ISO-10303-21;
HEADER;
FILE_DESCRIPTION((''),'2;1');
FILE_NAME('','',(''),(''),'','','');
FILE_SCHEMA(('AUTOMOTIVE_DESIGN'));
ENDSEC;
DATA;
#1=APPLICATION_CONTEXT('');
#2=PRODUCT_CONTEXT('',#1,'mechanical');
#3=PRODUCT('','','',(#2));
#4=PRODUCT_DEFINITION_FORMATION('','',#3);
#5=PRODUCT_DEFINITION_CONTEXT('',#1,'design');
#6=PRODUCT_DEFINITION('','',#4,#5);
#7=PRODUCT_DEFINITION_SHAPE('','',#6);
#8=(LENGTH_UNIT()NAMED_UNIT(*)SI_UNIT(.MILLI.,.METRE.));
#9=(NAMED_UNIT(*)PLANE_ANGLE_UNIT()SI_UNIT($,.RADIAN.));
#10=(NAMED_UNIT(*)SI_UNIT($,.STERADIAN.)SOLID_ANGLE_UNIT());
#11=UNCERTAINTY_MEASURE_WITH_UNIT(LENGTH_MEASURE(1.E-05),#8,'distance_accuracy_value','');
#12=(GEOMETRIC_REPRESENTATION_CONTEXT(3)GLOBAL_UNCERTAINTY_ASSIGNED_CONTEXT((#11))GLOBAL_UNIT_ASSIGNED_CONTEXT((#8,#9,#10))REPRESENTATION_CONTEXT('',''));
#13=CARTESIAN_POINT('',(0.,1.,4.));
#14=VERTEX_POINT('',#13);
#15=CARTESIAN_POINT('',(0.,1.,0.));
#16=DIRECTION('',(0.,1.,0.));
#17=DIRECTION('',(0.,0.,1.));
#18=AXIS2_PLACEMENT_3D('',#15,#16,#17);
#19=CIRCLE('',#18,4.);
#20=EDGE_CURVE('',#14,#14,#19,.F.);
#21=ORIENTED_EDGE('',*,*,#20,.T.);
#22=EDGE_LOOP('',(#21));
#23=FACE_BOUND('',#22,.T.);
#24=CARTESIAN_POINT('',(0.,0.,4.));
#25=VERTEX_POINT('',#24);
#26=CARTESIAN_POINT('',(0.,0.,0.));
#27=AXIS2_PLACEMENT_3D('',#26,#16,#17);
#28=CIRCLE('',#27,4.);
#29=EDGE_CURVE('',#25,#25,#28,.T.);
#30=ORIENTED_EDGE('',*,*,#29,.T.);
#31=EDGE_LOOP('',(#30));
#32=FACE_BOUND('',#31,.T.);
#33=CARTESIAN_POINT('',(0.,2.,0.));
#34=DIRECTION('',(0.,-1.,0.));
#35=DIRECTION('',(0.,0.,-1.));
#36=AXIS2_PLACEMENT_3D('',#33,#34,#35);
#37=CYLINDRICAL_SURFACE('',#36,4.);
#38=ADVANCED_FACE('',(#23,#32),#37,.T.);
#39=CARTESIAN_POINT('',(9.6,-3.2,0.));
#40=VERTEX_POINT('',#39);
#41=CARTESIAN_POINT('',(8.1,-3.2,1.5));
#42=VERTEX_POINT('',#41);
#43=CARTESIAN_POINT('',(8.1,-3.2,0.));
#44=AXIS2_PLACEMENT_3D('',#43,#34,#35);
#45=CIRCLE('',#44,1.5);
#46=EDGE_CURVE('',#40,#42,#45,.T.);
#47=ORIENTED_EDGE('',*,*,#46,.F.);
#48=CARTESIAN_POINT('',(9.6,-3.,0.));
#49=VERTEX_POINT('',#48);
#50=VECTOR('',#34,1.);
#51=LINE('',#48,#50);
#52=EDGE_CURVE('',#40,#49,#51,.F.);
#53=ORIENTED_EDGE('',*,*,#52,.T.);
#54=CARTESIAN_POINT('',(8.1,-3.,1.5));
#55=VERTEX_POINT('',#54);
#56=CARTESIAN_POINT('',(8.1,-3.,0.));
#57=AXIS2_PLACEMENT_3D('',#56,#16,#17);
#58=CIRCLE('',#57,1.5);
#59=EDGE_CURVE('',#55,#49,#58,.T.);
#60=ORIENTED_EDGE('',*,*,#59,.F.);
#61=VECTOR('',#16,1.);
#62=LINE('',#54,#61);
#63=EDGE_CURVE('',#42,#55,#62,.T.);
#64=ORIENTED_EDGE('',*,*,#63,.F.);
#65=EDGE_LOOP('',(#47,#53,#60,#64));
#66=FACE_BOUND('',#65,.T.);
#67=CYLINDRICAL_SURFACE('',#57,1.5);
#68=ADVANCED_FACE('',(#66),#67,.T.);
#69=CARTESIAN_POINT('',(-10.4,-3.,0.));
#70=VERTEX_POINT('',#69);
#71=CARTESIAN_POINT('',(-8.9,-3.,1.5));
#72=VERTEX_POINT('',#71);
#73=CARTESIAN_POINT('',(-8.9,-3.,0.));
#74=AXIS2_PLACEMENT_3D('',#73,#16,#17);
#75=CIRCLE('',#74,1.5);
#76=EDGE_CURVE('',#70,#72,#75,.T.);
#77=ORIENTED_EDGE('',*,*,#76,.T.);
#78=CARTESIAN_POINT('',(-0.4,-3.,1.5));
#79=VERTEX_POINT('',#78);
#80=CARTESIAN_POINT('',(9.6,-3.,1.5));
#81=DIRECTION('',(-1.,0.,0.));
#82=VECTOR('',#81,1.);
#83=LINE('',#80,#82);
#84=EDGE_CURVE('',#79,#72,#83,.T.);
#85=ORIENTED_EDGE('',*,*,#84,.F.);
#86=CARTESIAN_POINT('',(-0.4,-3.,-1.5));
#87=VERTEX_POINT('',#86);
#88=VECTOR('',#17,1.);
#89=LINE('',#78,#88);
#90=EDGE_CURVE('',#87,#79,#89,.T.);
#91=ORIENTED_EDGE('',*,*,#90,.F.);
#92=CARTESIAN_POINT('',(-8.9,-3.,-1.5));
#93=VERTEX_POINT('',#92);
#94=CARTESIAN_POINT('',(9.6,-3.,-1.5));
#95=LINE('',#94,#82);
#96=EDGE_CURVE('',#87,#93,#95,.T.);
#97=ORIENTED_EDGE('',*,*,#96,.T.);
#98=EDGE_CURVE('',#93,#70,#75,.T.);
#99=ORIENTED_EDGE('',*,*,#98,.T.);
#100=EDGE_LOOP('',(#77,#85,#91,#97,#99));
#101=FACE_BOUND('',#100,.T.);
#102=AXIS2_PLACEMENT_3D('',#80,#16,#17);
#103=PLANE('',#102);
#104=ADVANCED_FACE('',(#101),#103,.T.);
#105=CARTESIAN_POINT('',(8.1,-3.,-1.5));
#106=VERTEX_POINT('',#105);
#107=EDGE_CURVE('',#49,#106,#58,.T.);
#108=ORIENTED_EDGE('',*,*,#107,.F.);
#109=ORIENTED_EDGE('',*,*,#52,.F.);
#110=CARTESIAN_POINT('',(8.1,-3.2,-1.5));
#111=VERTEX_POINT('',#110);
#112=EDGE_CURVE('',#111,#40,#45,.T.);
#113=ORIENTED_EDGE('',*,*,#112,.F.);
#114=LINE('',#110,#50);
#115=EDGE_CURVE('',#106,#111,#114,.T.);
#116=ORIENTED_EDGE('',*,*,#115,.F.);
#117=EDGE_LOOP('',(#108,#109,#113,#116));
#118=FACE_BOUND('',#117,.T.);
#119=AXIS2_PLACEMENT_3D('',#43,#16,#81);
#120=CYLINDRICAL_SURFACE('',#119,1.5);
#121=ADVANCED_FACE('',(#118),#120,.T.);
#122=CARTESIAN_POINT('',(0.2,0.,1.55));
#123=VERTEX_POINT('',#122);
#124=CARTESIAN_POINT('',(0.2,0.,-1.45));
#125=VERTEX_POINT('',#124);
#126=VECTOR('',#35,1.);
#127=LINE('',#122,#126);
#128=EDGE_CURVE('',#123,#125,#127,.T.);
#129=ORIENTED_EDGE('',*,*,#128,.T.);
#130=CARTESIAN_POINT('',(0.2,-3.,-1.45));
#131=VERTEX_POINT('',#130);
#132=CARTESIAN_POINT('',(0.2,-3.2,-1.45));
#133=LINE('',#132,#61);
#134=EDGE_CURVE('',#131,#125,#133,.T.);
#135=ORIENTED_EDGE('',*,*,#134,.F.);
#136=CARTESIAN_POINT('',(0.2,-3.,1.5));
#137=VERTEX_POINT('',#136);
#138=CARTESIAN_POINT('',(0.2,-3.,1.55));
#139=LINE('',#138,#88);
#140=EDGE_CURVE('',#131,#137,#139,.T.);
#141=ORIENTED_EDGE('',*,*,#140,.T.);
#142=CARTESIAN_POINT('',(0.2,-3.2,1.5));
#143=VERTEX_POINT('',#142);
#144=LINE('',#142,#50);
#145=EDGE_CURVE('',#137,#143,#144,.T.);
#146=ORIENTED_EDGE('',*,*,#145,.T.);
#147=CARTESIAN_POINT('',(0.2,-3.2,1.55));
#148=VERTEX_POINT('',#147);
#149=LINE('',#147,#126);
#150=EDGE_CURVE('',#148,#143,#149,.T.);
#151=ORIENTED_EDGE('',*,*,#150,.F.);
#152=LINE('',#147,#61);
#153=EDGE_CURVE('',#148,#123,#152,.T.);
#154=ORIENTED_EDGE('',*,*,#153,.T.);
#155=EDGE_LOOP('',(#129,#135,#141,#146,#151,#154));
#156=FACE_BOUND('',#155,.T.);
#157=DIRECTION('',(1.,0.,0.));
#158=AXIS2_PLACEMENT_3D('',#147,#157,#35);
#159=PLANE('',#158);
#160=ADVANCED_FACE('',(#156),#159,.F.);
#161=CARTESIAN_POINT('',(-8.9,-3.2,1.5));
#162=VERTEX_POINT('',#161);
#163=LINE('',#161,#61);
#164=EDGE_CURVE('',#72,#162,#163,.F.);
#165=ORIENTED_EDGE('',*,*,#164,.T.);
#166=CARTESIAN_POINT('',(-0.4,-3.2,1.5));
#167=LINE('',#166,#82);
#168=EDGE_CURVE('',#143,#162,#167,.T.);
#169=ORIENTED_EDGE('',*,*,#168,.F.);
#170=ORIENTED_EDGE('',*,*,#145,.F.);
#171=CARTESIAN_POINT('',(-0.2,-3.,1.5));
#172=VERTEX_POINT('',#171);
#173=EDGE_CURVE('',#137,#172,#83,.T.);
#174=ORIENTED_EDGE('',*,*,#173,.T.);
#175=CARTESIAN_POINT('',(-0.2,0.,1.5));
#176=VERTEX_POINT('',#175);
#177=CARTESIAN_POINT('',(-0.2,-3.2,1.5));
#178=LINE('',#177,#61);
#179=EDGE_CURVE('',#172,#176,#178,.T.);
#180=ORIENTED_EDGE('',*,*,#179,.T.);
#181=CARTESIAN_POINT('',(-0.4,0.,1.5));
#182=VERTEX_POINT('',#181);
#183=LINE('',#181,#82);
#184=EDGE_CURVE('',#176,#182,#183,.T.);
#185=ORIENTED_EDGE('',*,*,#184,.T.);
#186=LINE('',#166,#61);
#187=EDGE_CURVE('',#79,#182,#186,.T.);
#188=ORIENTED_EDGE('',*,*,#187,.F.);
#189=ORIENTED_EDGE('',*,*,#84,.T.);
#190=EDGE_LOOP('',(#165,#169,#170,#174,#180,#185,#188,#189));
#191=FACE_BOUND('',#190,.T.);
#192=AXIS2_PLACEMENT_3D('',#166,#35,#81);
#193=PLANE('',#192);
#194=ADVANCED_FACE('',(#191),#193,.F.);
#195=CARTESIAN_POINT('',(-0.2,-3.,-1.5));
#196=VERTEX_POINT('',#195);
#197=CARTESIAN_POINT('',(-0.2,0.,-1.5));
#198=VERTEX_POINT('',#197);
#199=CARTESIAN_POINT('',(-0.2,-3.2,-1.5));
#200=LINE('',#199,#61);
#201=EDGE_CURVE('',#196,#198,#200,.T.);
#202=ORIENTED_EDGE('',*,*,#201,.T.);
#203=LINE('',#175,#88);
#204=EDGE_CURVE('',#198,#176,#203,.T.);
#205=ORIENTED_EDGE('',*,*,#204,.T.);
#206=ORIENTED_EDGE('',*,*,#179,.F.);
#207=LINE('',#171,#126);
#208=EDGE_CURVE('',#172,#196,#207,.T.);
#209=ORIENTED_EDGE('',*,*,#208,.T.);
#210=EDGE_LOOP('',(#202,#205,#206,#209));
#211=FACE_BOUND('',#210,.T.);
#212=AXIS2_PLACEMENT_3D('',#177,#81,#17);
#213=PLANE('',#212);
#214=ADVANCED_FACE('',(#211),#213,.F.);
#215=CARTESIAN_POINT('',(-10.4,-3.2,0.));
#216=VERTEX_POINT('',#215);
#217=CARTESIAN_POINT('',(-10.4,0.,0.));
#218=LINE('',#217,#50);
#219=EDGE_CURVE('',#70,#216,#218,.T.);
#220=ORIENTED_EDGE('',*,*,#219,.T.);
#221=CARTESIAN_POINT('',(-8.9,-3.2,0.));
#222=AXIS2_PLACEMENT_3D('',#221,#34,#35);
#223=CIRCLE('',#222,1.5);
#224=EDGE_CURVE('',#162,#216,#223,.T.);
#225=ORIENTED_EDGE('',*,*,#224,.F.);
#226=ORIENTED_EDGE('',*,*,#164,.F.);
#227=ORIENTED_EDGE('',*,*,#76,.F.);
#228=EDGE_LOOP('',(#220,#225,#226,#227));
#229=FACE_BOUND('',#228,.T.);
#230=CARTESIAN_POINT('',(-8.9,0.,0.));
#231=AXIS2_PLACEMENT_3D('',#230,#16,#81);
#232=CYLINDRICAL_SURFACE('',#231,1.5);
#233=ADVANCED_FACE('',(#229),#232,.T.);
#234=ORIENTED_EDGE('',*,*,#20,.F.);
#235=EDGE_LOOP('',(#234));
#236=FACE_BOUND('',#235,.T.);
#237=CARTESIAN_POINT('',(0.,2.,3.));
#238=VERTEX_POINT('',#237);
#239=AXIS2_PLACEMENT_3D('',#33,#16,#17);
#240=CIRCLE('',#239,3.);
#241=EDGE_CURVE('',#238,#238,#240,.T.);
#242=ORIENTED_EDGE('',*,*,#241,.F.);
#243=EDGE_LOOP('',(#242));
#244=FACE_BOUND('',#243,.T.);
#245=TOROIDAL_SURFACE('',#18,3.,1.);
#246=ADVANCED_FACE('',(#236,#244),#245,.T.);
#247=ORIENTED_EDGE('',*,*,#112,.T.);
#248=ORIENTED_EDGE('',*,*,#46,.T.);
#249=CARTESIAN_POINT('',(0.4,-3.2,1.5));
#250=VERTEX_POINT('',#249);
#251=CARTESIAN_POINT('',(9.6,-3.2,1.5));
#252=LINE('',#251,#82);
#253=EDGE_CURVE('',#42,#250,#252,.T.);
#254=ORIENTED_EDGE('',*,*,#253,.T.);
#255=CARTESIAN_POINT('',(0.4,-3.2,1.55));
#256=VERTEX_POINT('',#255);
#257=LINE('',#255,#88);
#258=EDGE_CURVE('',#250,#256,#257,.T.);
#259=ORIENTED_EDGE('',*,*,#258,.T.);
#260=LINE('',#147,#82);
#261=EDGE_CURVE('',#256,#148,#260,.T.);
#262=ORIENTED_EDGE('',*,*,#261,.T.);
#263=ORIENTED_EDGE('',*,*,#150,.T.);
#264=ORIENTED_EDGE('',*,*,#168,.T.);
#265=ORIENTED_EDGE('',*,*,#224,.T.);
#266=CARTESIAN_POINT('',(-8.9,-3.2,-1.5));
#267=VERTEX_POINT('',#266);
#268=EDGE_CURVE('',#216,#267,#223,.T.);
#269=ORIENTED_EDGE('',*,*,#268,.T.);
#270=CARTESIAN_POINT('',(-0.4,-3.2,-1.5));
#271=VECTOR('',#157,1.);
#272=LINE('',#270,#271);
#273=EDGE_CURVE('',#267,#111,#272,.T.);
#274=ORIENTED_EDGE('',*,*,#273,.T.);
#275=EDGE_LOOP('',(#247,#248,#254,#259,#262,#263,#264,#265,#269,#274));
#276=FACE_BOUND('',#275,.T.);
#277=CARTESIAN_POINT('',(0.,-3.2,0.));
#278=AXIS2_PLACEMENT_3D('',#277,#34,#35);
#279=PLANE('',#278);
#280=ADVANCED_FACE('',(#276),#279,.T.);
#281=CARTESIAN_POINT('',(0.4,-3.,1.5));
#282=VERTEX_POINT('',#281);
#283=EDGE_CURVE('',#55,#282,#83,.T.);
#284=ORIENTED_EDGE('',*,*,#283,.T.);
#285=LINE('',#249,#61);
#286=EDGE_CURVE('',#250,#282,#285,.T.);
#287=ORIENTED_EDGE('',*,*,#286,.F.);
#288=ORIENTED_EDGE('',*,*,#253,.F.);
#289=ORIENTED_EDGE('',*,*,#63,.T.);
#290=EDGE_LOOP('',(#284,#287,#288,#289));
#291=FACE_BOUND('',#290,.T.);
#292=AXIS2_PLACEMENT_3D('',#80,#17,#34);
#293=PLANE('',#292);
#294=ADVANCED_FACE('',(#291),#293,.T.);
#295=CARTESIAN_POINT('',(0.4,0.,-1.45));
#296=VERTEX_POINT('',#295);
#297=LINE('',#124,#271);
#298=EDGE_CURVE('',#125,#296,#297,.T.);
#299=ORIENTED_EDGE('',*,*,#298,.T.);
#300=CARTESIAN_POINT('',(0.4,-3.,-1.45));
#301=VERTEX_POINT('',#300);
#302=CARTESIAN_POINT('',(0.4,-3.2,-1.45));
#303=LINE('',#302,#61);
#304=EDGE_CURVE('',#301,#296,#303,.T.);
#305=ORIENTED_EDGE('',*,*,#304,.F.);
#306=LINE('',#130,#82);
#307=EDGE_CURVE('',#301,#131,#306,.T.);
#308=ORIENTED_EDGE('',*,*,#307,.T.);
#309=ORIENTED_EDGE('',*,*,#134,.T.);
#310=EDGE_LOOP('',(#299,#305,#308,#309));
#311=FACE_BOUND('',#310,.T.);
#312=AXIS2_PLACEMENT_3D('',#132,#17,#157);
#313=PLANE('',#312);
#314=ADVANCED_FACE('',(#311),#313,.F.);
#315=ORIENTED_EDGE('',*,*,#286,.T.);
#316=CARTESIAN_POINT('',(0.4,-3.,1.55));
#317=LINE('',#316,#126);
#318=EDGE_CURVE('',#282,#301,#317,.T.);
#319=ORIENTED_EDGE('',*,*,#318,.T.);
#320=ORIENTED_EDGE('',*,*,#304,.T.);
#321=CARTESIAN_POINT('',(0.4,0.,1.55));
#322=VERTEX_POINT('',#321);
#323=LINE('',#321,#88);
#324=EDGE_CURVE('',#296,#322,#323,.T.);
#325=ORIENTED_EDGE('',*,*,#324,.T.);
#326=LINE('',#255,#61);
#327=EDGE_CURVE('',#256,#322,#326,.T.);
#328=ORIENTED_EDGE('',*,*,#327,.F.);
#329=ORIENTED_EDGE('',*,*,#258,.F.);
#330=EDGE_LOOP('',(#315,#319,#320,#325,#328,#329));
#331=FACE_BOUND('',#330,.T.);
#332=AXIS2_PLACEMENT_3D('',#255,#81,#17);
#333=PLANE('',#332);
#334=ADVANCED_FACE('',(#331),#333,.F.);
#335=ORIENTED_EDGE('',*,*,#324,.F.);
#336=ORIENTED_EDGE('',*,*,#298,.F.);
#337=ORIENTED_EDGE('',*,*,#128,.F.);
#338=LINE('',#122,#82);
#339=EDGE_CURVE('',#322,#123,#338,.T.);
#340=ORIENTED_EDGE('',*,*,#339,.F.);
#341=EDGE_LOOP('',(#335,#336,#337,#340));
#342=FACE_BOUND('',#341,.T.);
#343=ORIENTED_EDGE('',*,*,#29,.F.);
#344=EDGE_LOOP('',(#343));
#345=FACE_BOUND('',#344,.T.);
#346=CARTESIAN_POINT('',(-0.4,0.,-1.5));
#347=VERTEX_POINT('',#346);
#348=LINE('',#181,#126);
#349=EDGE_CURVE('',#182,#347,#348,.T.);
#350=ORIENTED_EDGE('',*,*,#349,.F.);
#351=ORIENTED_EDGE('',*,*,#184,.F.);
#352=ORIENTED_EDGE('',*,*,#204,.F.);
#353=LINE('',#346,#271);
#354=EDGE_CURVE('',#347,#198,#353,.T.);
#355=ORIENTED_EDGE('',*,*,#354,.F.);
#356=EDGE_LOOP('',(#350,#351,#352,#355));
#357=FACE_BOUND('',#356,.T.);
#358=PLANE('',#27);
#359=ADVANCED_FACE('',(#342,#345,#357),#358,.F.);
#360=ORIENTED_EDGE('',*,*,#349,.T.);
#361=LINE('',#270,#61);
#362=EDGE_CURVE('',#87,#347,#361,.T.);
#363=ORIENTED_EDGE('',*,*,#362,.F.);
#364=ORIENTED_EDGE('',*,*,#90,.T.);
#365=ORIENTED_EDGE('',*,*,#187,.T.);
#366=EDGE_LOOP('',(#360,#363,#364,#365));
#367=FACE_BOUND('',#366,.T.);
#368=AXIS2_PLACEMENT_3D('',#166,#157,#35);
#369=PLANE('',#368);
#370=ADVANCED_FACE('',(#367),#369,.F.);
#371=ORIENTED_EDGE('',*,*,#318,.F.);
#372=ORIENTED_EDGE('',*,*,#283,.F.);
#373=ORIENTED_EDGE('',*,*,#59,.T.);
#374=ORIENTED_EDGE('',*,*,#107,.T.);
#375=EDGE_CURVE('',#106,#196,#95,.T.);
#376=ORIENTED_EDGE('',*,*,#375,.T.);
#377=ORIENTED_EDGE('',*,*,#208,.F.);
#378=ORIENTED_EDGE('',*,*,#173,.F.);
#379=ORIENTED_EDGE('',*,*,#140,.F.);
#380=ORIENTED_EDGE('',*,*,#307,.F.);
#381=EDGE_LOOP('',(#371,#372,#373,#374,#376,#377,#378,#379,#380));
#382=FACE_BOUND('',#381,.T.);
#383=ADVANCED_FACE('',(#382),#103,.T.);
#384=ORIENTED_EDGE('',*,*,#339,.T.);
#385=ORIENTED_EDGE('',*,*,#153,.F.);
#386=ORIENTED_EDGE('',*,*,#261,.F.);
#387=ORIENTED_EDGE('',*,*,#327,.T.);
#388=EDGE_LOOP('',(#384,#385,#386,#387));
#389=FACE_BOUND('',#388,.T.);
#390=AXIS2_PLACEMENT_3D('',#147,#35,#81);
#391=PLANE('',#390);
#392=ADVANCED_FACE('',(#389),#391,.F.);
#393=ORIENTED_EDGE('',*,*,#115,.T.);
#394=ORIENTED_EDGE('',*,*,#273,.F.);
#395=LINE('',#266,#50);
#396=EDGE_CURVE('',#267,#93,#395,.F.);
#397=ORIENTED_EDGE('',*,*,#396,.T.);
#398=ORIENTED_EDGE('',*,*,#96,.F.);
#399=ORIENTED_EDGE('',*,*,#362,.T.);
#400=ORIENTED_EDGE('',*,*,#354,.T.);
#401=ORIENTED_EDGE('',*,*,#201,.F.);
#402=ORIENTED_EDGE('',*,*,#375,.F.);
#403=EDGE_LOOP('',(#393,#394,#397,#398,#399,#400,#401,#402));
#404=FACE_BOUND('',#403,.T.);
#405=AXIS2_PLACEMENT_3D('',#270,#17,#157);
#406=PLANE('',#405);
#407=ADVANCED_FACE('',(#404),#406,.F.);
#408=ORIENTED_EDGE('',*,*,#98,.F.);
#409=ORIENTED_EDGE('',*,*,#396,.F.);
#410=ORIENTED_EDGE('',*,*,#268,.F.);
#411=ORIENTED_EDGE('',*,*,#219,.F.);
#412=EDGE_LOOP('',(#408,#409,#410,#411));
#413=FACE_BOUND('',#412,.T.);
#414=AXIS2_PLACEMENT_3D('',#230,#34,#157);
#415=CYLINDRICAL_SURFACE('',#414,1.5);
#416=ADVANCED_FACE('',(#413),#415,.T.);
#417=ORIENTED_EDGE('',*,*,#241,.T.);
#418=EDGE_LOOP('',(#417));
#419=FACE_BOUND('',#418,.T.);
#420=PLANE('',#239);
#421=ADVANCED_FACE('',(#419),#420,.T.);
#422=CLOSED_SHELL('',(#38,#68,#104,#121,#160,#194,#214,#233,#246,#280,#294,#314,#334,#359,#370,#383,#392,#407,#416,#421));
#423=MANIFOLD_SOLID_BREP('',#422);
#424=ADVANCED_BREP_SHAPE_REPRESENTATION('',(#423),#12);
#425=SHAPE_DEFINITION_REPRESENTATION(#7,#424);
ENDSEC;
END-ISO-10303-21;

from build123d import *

# Parameters (mm, degrees)
ESQUISSE1_R             = 4
BOSS_EXTRU_1_DEPTH      = 2
CONG_1_R                = 1
ESQUISSE2_W             = 0.2
ESQUISSE2_H             = 3
BOSS_EXTRU_2_DEPTH      = 3.2
BOSS_EXTRU_3_DEPTH      = 10
BOSS_EXTRU_3_DEPTH_BACK = 10
ESQUISSE3_W             = 3
ESQUISSE3_H             = 0.2
CONG_2_R                = 1.5


with BuildPart() as part:
    # Esquisse1 → Boss.-Extru.1 (new body)
    with BuildSketch(Plane(origin=(0, 0, 0), x_dir=(1, 0, 0), z_dir=(0, 1, 0))):
        with Locations(Location((0, 0, 0), (0, 0, 270))):
            Circle(ESQUISSE1_R)
    extrude(amount=BOSS_EXTRU_1_DEPTH)

    # Congé1
    cong_1_edges = [part.edges().sort_by_distance(p)[0] for p in [
        (0, 2, -4),
    ]]
    fillet(cong_1_edges, radius=CONG_1_R)

    # Esquisse2 → Boss.-Extru.2 (add)
    with BuildSketch(Plane.XZ):
        with Locations((-0.3, 0)):
            Rectangle(ESQUISSE2_W, ESQUISSE2_H)
        with Locations((0.3, 0.05)):
            Rectangle(ESQUISSE2_W, ESQUISSE2_H)
    extrude(amount=BOSS_EXTRU_2_DEPTH)

    # Esquisse3 → Boss.-Extru.3 (add, two sides: drawn at the far end of the back side and taken through both)
    with BuildSketch(Plane.ZY.offset(0.4).offset(-BOSS_EXTRU_3_DEPTH_BACK)):
        with Locations((0, -3.1)):
            Rectangle(ESQUISSE3_W, ESQUISSE3_H)
    extrude(amount=BOSS_EXTRU_3_DEPTH + BOSS_EXTRU_3_DEPTH_BACK)

    # Congé2
    cong_2_edges = [part.edges().sort_by_distance(p)[0] for p in [
        (9.6, -3.1, -1.5),
        (9.6, -3.1, 1.5),
        (-10.4, -3.1, 1.5),
        (-10.4, -3.1, -1.5),
    ]]
    fillet(cong_2_edges, radius=CONG_2_R - 0.0001)  # a hair under: the kernel refuses the full size


solid = part.part
